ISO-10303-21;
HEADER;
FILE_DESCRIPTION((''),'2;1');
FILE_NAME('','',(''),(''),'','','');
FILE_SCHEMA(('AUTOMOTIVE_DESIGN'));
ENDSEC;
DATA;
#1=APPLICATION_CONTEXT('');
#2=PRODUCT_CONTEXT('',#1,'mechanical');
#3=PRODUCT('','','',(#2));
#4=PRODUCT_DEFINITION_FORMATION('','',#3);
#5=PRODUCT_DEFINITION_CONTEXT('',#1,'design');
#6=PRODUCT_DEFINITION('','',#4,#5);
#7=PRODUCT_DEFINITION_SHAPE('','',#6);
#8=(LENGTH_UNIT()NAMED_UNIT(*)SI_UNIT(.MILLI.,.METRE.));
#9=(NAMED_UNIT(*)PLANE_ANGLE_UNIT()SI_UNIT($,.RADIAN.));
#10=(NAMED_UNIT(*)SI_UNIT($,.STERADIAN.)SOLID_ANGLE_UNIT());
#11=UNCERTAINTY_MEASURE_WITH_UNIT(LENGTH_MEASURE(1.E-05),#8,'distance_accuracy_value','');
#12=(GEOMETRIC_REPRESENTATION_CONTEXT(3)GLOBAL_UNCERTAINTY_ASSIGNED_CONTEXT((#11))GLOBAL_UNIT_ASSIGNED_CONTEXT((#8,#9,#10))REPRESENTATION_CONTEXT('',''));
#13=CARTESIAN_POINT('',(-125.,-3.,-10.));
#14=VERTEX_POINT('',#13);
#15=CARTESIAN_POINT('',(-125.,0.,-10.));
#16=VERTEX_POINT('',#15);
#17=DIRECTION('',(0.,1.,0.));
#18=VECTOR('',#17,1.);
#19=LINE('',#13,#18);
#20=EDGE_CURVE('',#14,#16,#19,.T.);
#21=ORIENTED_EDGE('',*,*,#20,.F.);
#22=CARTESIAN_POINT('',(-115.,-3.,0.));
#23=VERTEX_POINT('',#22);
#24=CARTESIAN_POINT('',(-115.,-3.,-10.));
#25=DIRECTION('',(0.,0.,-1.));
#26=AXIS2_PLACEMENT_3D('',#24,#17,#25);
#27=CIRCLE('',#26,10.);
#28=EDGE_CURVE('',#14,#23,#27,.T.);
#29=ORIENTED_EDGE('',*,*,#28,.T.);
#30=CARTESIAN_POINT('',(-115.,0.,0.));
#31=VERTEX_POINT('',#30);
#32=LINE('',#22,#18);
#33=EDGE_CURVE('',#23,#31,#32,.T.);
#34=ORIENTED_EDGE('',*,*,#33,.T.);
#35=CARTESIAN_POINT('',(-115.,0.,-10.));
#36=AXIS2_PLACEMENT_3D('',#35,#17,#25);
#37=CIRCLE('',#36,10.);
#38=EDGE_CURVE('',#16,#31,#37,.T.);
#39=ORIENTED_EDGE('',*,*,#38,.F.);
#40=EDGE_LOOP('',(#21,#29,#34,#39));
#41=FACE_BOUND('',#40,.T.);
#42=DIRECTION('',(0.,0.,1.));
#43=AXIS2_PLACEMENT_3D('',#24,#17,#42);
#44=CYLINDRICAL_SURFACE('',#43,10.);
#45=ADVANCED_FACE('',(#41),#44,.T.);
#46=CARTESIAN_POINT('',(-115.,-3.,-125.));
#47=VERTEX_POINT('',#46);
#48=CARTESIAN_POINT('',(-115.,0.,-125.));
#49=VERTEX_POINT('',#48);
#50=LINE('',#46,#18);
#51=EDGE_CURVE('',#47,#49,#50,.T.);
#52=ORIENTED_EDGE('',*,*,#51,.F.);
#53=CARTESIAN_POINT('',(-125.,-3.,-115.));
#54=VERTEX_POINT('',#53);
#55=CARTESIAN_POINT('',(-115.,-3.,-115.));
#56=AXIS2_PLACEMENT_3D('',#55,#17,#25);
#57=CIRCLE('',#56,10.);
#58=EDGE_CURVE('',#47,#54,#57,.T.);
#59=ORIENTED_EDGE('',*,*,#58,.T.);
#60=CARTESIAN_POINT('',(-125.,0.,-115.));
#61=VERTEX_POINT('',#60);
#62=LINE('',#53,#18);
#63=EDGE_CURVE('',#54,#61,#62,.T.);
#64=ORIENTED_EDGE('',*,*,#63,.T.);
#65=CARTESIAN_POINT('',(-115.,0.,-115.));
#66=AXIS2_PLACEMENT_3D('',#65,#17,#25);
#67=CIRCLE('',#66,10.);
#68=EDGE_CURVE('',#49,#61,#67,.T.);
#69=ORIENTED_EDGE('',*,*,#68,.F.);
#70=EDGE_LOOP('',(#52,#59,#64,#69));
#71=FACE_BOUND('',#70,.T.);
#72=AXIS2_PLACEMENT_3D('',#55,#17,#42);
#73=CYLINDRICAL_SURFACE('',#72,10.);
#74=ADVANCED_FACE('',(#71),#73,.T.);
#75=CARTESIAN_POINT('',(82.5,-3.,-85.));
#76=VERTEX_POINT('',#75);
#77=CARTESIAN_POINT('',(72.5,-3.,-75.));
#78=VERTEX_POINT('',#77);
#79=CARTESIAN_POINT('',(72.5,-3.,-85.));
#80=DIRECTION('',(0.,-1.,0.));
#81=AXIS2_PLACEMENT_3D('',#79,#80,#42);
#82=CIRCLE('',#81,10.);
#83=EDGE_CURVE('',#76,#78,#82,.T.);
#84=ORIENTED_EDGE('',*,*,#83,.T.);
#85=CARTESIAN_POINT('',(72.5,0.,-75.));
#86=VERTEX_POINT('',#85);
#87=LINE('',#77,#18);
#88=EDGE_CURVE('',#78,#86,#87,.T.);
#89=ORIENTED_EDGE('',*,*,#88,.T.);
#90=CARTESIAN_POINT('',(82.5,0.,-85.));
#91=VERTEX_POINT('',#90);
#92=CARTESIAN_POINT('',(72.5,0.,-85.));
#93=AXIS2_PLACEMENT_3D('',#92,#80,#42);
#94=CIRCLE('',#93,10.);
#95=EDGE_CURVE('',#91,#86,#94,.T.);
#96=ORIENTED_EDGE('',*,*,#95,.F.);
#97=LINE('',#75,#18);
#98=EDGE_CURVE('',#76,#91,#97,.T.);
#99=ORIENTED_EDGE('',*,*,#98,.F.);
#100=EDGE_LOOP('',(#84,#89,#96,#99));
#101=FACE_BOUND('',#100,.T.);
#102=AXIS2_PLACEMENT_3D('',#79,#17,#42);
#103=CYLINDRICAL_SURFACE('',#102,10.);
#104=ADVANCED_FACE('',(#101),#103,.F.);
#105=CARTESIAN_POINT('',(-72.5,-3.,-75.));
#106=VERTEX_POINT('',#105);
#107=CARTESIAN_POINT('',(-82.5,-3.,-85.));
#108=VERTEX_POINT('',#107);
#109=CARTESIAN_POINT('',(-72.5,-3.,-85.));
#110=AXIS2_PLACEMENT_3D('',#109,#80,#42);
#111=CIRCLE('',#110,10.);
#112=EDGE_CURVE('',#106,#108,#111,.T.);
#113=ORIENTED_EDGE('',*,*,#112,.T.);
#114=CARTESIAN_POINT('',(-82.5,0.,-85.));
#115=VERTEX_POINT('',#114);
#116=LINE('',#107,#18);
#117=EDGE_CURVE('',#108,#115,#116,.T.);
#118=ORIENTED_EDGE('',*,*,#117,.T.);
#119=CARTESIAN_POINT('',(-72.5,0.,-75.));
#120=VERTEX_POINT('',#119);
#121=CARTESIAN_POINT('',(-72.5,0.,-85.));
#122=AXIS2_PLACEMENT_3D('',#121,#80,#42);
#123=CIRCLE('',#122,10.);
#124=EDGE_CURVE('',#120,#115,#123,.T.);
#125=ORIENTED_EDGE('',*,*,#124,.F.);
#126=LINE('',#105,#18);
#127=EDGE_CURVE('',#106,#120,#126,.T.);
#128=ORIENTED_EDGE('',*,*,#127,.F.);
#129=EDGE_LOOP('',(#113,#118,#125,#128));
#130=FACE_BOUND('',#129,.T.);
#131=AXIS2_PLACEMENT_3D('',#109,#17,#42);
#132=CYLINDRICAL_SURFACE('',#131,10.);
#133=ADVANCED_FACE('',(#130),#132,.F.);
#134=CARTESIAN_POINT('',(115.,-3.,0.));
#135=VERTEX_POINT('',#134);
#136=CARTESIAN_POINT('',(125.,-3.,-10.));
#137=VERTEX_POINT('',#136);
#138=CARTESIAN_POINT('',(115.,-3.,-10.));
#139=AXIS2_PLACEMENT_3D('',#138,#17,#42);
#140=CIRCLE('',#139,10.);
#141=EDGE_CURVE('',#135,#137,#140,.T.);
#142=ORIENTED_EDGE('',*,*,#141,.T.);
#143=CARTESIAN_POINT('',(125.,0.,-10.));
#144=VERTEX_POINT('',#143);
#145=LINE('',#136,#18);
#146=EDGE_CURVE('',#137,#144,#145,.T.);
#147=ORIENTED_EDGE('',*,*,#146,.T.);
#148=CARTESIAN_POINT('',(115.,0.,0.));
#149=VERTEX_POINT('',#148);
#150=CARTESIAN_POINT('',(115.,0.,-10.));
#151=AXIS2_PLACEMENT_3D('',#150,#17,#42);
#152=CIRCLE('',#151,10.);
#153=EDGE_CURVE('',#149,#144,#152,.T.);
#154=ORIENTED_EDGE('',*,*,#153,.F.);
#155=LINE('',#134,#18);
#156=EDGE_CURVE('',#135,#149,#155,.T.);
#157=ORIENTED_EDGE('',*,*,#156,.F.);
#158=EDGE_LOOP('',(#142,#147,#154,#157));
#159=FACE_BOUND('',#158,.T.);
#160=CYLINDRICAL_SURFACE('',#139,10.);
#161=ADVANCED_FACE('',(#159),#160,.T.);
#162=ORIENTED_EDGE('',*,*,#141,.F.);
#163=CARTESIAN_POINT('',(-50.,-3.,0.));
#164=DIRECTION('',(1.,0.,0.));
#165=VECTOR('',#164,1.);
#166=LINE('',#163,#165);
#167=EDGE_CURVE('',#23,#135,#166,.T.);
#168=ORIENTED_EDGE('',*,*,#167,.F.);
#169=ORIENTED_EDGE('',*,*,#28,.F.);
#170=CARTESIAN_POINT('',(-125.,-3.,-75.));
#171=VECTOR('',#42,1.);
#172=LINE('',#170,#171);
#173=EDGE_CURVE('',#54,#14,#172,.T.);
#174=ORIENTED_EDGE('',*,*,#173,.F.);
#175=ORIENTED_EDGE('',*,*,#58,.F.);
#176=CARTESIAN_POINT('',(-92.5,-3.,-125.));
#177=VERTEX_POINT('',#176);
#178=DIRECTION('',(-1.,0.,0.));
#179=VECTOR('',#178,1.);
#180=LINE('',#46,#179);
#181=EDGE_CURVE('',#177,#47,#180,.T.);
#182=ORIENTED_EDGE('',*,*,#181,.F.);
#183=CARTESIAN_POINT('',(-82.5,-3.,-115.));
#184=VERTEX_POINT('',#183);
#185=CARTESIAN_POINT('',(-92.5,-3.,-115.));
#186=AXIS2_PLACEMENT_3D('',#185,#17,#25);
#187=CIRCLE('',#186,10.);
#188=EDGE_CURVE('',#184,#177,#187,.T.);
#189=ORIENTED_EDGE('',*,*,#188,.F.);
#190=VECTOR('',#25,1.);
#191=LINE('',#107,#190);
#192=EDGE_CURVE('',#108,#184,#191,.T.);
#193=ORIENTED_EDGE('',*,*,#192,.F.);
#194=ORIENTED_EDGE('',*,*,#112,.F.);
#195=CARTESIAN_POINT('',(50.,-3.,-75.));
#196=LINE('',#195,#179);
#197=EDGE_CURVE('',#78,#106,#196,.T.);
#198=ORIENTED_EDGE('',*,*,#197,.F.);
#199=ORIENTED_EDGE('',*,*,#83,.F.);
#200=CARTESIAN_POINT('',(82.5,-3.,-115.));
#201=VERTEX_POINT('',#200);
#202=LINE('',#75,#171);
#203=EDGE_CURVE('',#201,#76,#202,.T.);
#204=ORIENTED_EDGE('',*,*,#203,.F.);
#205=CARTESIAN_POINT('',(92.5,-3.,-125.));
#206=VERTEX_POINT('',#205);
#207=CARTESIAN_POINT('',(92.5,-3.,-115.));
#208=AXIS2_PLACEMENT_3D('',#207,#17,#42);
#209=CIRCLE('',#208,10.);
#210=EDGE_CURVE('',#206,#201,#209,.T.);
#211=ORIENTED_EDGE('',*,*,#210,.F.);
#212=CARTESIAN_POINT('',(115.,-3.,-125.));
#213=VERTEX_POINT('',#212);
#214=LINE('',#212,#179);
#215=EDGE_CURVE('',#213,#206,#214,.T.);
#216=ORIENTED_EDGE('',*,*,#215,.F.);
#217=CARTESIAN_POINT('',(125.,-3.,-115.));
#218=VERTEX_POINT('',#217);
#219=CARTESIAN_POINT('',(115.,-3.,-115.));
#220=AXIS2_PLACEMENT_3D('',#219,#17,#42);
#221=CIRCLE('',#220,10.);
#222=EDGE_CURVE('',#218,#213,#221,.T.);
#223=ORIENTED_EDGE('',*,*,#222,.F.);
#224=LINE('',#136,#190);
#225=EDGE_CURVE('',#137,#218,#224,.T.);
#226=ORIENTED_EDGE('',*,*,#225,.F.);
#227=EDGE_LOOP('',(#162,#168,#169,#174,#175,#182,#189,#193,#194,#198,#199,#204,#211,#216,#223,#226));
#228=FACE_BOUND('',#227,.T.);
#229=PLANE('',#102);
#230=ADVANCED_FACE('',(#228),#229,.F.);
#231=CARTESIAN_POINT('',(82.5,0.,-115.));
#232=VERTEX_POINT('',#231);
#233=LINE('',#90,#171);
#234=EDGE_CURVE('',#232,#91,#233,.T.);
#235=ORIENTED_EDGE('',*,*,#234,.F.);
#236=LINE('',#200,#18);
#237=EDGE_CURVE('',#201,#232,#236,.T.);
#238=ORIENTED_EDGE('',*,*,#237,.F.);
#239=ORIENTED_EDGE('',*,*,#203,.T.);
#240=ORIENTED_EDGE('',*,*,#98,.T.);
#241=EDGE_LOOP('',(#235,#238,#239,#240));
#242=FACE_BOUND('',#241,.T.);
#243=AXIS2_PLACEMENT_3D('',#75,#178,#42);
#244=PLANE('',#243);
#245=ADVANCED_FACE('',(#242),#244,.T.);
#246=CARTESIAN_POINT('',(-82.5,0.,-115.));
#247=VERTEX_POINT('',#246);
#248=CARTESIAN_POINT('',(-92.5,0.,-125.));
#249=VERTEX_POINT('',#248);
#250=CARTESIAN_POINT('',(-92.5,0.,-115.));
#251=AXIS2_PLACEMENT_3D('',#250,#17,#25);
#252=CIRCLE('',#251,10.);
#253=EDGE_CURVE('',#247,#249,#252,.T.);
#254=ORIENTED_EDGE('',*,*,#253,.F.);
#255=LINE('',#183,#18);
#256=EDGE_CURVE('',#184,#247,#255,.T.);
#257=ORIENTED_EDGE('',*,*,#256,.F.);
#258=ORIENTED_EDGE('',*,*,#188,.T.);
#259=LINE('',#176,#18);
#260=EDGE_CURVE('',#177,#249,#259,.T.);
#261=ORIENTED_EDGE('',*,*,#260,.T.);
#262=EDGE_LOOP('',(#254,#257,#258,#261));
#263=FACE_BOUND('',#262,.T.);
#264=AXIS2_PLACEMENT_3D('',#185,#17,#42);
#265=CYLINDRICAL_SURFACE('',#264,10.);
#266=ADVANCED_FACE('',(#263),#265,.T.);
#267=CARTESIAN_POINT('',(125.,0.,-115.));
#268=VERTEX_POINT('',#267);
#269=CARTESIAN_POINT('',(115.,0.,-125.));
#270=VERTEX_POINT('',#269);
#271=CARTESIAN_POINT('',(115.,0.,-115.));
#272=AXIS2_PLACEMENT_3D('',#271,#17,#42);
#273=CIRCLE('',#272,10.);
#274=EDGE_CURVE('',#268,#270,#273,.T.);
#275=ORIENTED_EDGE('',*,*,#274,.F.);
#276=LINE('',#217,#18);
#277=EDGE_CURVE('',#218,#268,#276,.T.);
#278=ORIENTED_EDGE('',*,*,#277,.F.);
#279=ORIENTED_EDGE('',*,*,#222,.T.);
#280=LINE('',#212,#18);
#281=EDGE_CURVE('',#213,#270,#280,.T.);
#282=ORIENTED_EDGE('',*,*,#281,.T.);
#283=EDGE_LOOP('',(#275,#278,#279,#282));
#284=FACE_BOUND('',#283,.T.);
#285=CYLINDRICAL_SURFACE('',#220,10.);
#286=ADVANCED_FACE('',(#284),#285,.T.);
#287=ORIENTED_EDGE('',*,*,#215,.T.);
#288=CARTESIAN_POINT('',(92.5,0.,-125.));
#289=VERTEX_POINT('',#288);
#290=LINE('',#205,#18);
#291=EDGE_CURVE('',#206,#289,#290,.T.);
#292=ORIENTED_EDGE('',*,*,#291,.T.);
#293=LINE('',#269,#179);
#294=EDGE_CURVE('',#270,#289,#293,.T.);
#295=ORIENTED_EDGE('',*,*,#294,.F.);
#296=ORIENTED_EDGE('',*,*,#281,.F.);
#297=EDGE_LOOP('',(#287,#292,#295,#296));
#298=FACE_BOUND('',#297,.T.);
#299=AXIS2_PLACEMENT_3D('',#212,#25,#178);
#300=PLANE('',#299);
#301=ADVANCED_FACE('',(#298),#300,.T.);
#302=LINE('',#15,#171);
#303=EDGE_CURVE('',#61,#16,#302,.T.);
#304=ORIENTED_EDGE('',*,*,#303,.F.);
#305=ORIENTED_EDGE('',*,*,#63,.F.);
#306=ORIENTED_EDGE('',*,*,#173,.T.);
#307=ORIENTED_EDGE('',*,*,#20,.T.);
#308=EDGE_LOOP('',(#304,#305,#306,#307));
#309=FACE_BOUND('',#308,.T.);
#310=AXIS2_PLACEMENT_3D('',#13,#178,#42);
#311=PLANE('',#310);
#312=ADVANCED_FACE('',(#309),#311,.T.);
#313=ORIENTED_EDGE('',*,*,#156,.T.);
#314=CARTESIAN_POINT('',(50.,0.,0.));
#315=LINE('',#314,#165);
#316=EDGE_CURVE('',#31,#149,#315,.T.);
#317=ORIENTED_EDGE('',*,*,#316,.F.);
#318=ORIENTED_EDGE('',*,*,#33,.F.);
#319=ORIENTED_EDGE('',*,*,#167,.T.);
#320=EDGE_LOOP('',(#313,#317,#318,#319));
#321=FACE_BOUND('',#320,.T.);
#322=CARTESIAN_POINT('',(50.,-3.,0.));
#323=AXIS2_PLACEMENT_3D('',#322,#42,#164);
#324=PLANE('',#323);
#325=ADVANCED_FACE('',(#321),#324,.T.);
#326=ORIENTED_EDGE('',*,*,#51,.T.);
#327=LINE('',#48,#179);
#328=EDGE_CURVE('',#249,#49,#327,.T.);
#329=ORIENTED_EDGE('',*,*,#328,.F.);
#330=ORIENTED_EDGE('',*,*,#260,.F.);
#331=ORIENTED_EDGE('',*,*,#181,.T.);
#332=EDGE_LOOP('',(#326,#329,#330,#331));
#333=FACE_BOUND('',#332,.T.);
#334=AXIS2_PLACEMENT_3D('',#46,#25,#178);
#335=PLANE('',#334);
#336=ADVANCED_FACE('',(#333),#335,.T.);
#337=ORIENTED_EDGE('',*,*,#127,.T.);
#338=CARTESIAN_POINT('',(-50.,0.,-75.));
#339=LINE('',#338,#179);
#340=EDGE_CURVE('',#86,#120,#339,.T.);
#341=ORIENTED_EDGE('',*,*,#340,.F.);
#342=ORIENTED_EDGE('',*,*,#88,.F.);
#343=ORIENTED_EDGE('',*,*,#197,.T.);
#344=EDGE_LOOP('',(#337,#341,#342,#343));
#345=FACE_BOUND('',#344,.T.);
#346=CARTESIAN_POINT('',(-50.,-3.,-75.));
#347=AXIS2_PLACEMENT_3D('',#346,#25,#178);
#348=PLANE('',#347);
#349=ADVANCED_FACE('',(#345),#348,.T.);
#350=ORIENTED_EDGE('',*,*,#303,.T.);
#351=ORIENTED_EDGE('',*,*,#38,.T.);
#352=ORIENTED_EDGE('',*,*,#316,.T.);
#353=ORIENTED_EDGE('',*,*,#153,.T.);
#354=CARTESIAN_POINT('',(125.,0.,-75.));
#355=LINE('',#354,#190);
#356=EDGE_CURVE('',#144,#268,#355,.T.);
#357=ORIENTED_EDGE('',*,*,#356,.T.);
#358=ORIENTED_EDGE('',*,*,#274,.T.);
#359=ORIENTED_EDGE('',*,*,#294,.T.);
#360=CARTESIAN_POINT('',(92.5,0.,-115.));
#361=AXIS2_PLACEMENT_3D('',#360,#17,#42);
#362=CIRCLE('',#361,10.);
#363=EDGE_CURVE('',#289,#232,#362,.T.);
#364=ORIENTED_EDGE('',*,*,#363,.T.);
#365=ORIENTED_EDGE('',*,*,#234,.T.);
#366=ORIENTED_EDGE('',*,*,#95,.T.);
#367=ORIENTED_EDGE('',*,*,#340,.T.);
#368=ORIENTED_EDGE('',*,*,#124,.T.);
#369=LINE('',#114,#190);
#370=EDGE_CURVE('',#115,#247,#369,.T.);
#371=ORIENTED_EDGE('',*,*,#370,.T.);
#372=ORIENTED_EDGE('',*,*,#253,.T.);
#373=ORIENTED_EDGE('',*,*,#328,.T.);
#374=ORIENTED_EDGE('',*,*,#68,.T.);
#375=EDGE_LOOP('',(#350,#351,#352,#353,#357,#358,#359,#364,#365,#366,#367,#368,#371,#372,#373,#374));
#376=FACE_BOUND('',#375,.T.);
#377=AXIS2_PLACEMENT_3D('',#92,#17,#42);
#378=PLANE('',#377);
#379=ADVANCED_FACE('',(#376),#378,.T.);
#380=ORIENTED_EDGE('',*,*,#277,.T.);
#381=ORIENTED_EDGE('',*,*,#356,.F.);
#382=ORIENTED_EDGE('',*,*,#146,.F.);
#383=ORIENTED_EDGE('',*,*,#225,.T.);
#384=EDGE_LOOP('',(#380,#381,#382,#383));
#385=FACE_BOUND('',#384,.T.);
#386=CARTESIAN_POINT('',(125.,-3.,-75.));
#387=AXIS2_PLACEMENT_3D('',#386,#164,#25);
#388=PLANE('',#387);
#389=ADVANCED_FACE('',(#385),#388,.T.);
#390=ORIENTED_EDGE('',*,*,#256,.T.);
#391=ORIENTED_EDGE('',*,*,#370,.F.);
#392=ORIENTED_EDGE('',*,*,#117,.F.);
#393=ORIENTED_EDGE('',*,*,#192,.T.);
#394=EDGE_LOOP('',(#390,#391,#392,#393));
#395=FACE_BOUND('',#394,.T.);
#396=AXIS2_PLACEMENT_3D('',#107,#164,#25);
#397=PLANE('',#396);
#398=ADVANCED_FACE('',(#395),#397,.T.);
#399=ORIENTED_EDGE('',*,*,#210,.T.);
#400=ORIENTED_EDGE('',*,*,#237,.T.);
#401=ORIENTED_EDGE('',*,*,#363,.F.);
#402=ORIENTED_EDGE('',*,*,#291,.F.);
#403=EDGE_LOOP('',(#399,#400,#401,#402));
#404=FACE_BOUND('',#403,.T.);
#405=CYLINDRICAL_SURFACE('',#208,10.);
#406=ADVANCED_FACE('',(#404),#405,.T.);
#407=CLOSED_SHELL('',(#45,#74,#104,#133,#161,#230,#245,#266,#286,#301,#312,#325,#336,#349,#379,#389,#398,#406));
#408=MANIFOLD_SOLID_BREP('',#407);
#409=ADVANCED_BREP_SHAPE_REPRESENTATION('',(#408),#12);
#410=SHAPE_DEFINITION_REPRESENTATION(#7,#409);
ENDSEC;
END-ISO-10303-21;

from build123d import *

# Parameters (mm, degrees)
BASE_FLANGE1_DEPTH = 3


# Sheet-metal steps are written as plain solids
with BuildPart() as part:
    # Sketch16 → Base-Flange1 (new body)
    with BuildSketch(Plane(origin=(0, 0, 0), x_dir=(1, 0, 0), z_dir=(0, 1, 0))):
        with BuildLine():
            Line((-50, 0), (50, 0))
            Line((50, 0), (115, 0))
            ThreePointArc((115, 0), (122.071067812, 2.928932188), (125, 10))
            Line((125, 10), (125, 75))
            Line((125, 75), (125, 115))
            ThreePointArc((125, 115), (122.071067812, 122.071067812), (115, 125))
            Line((115, 125), (92.5, 125))
            ThreePointArc((92.5, 125), (85.428932188, 122.071067812), (82.5, 115))
            Line((82.5, 115), (82.5, 85))
            ThreePointArc((82.5, 85), (79.571067812, 77.928932188), (72.5, 75))
            Line((72.5, 75), (50, 75))
            Line((50, 75), (-50, 75))
            Line((-50, 75), (-72.5, 75))
            ThreePointArc((-72.5, 75), (-79.571067812, 77.928932188), (-82.5, 85))
            Line((-82.5, 85), (-82.5, 115))
            ThreePointArc((-82.5, 115), (-85.428932188, 122.071067812), (-92.5, 125))
            Line((-92.5, 125), (-115, 125))
            ThreePointArc((-115, 125), (-122.071067812, 122.071067812), (-125, 115))
            Line((-125, 115), (-125, 75))
            Line((-125, 75), (-125, 10))
            ThreePointArc((-125, 10), (-122.071067812, 2.928932188), (-115, 0))
            Line((-115, 0), (-50, 0))
        make_face()
    extrude(amount=-BASE_FLANGE1_DEPTH)


solid = part.part
